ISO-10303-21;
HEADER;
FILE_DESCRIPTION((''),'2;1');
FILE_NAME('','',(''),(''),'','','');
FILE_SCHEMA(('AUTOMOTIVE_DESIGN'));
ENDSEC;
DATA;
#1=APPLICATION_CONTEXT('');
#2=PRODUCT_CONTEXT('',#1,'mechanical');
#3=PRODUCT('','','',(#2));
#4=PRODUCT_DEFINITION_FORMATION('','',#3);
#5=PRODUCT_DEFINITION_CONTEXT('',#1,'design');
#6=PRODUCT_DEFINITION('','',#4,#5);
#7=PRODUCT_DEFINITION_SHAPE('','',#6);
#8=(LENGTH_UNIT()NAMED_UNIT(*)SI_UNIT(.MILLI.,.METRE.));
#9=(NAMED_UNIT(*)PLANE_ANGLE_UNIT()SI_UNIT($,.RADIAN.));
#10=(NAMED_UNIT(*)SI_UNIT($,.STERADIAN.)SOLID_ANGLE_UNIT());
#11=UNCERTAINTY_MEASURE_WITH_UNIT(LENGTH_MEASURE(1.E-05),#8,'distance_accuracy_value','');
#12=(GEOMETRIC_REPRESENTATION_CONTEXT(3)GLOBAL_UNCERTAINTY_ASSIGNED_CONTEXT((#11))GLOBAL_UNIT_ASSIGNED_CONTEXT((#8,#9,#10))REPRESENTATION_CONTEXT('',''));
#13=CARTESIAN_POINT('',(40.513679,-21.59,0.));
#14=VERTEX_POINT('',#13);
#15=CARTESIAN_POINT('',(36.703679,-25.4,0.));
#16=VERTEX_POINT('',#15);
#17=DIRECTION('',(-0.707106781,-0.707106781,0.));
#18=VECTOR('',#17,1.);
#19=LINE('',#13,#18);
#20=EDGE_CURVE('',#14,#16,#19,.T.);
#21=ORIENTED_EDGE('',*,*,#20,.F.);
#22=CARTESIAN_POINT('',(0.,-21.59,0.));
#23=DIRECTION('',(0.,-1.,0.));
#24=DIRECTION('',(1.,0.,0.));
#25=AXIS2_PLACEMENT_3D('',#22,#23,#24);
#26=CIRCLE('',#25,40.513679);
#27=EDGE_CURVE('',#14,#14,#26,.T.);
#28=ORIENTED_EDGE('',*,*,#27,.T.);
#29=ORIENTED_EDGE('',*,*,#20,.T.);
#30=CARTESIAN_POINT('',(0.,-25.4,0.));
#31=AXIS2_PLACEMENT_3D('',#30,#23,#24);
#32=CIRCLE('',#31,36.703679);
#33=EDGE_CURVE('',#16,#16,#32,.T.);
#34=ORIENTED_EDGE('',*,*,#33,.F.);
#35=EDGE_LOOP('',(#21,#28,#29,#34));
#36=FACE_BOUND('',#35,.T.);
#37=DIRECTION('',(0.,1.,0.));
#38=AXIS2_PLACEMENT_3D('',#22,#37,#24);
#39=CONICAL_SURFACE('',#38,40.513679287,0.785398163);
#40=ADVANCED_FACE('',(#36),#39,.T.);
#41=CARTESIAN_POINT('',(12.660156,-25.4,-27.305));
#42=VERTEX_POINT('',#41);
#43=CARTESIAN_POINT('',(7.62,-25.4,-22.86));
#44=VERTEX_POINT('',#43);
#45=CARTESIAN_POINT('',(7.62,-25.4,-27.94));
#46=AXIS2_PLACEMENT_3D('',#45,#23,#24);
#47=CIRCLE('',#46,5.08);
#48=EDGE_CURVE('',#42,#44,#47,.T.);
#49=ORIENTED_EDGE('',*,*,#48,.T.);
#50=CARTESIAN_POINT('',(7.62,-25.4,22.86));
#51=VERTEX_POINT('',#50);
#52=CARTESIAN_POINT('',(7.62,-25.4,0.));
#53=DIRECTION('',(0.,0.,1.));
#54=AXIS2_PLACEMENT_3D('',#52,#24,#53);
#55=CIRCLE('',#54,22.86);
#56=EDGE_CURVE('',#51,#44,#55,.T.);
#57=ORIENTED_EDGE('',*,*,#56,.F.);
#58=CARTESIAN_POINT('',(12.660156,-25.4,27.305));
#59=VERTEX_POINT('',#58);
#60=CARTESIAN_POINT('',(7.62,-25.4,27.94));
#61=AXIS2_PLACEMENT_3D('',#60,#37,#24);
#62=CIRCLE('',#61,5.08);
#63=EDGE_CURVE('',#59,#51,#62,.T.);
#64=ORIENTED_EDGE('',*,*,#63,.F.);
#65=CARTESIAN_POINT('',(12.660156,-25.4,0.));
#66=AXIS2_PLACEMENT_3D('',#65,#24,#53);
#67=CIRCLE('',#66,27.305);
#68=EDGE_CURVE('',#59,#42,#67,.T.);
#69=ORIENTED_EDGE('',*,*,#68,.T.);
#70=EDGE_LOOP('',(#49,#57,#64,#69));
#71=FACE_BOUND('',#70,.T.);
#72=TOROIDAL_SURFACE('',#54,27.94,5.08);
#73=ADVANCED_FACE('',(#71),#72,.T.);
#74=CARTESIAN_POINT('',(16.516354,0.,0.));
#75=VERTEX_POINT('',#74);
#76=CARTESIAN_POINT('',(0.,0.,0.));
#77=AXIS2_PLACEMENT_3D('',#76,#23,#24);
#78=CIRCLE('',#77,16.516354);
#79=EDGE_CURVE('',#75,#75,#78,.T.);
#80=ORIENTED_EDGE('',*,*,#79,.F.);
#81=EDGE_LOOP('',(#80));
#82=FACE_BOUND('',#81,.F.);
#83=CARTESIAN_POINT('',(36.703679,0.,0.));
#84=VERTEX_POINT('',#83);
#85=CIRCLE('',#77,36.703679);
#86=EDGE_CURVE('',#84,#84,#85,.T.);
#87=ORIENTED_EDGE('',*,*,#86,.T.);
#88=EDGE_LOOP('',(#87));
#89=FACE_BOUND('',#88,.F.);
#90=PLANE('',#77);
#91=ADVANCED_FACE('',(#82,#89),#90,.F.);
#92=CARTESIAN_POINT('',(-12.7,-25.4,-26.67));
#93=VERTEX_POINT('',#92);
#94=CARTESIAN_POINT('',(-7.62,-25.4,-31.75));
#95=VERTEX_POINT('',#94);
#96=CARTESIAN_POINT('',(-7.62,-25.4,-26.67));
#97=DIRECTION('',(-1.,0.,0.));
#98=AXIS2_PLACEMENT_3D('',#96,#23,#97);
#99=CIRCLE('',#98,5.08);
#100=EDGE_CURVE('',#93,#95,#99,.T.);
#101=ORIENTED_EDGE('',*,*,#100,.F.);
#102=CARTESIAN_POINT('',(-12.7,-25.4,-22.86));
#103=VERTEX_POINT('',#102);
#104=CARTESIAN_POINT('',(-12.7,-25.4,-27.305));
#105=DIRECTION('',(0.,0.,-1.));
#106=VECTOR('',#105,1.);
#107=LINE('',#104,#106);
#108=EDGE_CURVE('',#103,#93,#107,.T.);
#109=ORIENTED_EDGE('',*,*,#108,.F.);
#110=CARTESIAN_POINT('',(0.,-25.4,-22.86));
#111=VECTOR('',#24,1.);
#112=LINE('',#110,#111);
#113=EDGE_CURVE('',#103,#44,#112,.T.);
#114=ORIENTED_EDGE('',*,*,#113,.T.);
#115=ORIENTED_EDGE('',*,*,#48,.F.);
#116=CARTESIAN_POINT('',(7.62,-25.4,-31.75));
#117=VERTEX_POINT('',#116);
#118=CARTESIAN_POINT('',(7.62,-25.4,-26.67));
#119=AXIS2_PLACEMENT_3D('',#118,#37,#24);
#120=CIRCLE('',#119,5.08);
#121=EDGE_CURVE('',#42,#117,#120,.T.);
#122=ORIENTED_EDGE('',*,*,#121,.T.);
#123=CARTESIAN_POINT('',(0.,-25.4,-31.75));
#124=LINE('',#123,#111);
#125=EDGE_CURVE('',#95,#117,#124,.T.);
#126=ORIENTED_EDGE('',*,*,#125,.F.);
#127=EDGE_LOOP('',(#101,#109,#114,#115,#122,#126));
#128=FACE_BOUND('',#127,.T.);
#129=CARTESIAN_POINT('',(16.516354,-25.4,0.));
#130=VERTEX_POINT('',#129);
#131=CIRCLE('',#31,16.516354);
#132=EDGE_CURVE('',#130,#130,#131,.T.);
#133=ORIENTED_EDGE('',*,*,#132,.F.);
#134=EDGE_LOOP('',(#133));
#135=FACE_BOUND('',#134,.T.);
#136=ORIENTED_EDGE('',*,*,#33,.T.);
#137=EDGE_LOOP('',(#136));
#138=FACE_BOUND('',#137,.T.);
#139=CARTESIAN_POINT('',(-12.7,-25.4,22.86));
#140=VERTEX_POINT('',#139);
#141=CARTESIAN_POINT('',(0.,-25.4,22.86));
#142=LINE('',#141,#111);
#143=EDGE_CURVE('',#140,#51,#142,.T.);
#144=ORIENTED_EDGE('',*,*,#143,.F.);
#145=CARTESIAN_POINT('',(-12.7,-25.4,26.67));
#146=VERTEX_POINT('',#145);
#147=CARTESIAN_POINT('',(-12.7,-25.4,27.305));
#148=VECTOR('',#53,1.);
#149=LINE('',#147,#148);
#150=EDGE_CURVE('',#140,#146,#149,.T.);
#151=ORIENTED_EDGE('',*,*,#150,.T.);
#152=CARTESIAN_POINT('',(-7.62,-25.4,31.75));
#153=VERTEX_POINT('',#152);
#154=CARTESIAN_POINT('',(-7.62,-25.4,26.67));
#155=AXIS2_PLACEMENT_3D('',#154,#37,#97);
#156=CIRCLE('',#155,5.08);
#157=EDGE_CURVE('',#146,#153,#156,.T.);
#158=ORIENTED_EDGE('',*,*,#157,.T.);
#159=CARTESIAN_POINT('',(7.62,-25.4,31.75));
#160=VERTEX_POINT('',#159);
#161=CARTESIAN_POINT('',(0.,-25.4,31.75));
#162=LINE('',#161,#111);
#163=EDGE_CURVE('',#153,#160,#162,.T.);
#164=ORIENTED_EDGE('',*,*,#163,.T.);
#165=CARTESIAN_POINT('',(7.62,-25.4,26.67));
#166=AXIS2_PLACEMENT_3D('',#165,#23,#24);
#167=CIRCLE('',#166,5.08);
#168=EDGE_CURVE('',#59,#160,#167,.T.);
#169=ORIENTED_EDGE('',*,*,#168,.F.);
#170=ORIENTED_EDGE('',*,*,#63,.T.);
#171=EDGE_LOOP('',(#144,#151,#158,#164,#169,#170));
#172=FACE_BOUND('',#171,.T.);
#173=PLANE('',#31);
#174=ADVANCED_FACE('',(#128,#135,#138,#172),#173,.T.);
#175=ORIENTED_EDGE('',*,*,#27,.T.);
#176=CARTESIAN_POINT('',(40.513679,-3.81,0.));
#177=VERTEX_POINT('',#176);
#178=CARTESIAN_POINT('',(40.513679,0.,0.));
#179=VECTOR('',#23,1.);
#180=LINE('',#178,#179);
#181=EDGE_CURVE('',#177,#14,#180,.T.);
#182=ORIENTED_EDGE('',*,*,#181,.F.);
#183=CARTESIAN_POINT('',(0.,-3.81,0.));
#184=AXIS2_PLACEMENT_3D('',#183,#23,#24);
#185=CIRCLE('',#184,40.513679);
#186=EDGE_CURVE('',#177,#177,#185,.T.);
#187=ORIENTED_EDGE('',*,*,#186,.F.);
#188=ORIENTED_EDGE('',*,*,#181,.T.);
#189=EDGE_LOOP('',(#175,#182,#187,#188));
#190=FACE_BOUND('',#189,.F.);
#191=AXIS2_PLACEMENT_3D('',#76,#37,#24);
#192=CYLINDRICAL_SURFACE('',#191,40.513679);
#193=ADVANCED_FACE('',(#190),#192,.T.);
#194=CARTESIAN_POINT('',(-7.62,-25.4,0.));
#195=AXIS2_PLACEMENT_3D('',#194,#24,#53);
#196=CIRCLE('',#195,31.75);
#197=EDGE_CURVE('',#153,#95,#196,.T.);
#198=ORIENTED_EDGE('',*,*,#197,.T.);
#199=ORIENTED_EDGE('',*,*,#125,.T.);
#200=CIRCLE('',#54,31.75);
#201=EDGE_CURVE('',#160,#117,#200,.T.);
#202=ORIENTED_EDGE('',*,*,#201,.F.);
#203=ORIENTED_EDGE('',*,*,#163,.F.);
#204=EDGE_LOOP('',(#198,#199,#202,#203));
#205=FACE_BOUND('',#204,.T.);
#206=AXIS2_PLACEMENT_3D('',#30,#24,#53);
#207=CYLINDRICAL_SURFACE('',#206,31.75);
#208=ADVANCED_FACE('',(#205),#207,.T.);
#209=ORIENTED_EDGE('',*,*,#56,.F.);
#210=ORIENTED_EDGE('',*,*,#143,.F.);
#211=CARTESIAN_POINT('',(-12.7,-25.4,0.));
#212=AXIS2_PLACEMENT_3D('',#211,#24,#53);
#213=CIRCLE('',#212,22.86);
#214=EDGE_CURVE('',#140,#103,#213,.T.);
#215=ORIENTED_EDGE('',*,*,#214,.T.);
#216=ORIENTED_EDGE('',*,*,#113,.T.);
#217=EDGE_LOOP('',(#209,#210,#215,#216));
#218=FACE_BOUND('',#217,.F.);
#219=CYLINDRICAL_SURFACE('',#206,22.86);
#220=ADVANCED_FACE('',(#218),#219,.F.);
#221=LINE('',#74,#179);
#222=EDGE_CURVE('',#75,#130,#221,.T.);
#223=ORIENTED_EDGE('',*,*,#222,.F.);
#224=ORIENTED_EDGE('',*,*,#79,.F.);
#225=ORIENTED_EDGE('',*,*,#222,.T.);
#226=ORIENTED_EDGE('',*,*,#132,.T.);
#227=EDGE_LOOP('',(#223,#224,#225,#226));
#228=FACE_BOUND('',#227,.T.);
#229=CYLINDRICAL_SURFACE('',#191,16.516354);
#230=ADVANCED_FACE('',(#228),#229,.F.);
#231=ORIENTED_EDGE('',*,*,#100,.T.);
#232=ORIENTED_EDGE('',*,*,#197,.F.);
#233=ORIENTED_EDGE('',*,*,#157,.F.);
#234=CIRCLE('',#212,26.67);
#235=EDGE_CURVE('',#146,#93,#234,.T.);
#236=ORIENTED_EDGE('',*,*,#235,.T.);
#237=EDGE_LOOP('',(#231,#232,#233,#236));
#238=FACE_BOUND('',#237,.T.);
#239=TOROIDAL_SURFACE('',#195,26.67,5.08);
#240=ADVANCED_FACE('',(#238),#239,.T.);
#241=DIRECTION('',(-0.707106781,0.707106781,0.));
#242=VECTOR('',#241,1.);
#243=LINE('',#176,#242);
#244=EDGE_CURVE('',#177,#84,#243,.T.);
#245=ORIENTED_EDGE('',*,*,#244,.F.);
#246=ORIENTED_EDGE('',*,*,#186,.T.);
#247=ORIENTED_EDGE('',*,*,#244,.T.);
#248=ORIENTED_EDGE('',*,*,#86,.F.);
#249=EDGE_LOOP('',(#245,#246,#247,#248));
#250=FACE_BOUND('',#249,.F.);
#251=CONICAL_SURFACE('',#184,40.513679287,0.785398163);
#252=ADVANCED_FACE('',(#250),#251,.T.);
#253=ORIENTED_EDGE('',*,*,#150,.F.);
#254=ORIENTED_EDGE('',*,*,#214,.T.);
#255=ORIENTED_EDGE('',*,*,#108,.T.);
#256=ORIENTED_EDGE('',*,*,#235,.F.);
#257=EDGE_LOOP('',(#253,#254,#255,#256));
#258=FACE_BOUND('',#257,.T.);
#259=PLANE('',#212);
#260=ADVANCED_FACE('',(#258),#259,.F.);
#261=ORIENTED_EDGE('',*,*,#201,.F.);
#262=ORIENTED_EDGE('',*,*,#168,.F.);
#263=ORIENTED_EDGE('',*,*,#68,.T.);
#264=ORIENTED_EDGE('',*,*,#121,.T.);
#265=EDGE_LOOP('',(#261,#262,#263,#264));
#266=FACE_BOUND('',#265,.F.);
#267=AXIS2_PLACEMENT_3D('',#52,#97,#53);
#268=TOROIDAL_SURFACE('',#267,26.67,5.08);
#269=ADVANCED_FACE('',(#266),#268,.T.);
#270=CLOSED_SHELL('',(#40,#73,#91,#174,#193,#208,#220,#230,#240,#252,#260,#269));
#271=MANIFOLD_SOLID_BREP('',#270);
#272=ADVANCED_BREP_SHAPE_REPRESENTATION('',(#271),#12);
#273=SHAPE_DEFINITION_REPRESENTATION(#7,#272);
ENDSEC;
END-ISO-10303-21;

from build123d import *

# Parameters (mm, degrees)
F0_R        = 40.5136792868
F0_R_2      = 16.5163542796
F1_DEPTH    = 25.4
F2_W        = 25.4
F2_H        = 8.89
F3_ANGLE    = 180
F4_T2_ANGLE = 180
F4_T4_ANGLE = 180
F4_T6_ANGLE = 180
F5_SIZE     = 3.81


# Not quite as in the source:
# - a fillet or chamfer that OpenCascade refuses, or shapes differently, is made with other operations: its cross-section is extruded or revolved along the edge and cut away or added


with BuildPart() as f1:
    # F0 (on Front) → F1 (new body)
    with BuildSketch(Plane.XZ):
        Circle(F0_R)
        Circle(F0_R_2, mode=Mode.SUBTRACT)
    extrude(amount=F1_DEPTH)

    # F2 (on face) → F3 (revolve)
    with BuildSketch(Plane.XZ.offset(25.4)):
        with Locations((0, 27.305)):
            Rectangle(F2_W, F2_H)
    revolve(axis=Axis((-4.5374315232, -25.4, 0), (1, 0, 0)), revolution_arc=F3_ANGLE)

    # F4: fillet of radius 5.08 on 3 edges, made by hand

    # F4_s1 → F4_t2 (revolve, cut)
    with BuildSketch(Plane.XZ.offset(25.4)):
        with BuildLine():
            ThreePointArc((12.7, 27.94), (11.2121024484, 24.3478975516), (7.62, 22.86))
            Line((7.62, 22.86), (12.7, 22.86))
            Line((12.7, 22.86), (12.7, 27.94))
        make_face()
    revolve(axis=Axis((12.7, -25.4, 0), (1, 0, 0)), revolution_arc=F4_T2_ANGLE, mode=Mode.SUBTRACT)

    # F4_s3 → F4_t4 (revolve, cut)
    with BuildSketch(Plane.XZ.offset(25.4)):
        with BuildLine():
            ThreePointArc((12.7, 26.67), (11.2121024484, 30.2621024484), (7.62, 31.75))
            Line((7.62, 31.75), (12.7, 31.75))
            Line((12.7, 31.75), (12.7, 26.67))
        make_face()
    revolve(axis=Axis((12.7, -25.4, 0), (1, 0, 0)), revolution_arc=F4_T4_ANGLE, mode=Mode.SUBTRACT)

    # F4_s5 → F4_t6 (revolve, cut)
    with BuildSketch(Plane.XZ.offset(25.4)):
        with BuildLine():
            ThreePointArc((-12.7, 26.67), (-11.2121024484, 30.2621024484), (-7.62, 31.75))
            Line((-7.62, 31.75), (-12.7, 31.75))
            Line((-12.7, 31.75), (-12.7, 26.67))
        make_face()
    revolve(axis=Axis((-12.7, -25.4, 0), (1, 0, 0)), revolution_arc=F4_T6_ANGLE, mode=Mode.SUBTRACT)

    # F5
    f5_edges = [f1.edges().sort_by_distance(p)[0] for p in [
        (-40.513679, -25.4, 0),
        (-40.513679, 0, 0),
    ]]
    chamfer(f5_edges, length=F5_SIZE)


solid = f1.part
